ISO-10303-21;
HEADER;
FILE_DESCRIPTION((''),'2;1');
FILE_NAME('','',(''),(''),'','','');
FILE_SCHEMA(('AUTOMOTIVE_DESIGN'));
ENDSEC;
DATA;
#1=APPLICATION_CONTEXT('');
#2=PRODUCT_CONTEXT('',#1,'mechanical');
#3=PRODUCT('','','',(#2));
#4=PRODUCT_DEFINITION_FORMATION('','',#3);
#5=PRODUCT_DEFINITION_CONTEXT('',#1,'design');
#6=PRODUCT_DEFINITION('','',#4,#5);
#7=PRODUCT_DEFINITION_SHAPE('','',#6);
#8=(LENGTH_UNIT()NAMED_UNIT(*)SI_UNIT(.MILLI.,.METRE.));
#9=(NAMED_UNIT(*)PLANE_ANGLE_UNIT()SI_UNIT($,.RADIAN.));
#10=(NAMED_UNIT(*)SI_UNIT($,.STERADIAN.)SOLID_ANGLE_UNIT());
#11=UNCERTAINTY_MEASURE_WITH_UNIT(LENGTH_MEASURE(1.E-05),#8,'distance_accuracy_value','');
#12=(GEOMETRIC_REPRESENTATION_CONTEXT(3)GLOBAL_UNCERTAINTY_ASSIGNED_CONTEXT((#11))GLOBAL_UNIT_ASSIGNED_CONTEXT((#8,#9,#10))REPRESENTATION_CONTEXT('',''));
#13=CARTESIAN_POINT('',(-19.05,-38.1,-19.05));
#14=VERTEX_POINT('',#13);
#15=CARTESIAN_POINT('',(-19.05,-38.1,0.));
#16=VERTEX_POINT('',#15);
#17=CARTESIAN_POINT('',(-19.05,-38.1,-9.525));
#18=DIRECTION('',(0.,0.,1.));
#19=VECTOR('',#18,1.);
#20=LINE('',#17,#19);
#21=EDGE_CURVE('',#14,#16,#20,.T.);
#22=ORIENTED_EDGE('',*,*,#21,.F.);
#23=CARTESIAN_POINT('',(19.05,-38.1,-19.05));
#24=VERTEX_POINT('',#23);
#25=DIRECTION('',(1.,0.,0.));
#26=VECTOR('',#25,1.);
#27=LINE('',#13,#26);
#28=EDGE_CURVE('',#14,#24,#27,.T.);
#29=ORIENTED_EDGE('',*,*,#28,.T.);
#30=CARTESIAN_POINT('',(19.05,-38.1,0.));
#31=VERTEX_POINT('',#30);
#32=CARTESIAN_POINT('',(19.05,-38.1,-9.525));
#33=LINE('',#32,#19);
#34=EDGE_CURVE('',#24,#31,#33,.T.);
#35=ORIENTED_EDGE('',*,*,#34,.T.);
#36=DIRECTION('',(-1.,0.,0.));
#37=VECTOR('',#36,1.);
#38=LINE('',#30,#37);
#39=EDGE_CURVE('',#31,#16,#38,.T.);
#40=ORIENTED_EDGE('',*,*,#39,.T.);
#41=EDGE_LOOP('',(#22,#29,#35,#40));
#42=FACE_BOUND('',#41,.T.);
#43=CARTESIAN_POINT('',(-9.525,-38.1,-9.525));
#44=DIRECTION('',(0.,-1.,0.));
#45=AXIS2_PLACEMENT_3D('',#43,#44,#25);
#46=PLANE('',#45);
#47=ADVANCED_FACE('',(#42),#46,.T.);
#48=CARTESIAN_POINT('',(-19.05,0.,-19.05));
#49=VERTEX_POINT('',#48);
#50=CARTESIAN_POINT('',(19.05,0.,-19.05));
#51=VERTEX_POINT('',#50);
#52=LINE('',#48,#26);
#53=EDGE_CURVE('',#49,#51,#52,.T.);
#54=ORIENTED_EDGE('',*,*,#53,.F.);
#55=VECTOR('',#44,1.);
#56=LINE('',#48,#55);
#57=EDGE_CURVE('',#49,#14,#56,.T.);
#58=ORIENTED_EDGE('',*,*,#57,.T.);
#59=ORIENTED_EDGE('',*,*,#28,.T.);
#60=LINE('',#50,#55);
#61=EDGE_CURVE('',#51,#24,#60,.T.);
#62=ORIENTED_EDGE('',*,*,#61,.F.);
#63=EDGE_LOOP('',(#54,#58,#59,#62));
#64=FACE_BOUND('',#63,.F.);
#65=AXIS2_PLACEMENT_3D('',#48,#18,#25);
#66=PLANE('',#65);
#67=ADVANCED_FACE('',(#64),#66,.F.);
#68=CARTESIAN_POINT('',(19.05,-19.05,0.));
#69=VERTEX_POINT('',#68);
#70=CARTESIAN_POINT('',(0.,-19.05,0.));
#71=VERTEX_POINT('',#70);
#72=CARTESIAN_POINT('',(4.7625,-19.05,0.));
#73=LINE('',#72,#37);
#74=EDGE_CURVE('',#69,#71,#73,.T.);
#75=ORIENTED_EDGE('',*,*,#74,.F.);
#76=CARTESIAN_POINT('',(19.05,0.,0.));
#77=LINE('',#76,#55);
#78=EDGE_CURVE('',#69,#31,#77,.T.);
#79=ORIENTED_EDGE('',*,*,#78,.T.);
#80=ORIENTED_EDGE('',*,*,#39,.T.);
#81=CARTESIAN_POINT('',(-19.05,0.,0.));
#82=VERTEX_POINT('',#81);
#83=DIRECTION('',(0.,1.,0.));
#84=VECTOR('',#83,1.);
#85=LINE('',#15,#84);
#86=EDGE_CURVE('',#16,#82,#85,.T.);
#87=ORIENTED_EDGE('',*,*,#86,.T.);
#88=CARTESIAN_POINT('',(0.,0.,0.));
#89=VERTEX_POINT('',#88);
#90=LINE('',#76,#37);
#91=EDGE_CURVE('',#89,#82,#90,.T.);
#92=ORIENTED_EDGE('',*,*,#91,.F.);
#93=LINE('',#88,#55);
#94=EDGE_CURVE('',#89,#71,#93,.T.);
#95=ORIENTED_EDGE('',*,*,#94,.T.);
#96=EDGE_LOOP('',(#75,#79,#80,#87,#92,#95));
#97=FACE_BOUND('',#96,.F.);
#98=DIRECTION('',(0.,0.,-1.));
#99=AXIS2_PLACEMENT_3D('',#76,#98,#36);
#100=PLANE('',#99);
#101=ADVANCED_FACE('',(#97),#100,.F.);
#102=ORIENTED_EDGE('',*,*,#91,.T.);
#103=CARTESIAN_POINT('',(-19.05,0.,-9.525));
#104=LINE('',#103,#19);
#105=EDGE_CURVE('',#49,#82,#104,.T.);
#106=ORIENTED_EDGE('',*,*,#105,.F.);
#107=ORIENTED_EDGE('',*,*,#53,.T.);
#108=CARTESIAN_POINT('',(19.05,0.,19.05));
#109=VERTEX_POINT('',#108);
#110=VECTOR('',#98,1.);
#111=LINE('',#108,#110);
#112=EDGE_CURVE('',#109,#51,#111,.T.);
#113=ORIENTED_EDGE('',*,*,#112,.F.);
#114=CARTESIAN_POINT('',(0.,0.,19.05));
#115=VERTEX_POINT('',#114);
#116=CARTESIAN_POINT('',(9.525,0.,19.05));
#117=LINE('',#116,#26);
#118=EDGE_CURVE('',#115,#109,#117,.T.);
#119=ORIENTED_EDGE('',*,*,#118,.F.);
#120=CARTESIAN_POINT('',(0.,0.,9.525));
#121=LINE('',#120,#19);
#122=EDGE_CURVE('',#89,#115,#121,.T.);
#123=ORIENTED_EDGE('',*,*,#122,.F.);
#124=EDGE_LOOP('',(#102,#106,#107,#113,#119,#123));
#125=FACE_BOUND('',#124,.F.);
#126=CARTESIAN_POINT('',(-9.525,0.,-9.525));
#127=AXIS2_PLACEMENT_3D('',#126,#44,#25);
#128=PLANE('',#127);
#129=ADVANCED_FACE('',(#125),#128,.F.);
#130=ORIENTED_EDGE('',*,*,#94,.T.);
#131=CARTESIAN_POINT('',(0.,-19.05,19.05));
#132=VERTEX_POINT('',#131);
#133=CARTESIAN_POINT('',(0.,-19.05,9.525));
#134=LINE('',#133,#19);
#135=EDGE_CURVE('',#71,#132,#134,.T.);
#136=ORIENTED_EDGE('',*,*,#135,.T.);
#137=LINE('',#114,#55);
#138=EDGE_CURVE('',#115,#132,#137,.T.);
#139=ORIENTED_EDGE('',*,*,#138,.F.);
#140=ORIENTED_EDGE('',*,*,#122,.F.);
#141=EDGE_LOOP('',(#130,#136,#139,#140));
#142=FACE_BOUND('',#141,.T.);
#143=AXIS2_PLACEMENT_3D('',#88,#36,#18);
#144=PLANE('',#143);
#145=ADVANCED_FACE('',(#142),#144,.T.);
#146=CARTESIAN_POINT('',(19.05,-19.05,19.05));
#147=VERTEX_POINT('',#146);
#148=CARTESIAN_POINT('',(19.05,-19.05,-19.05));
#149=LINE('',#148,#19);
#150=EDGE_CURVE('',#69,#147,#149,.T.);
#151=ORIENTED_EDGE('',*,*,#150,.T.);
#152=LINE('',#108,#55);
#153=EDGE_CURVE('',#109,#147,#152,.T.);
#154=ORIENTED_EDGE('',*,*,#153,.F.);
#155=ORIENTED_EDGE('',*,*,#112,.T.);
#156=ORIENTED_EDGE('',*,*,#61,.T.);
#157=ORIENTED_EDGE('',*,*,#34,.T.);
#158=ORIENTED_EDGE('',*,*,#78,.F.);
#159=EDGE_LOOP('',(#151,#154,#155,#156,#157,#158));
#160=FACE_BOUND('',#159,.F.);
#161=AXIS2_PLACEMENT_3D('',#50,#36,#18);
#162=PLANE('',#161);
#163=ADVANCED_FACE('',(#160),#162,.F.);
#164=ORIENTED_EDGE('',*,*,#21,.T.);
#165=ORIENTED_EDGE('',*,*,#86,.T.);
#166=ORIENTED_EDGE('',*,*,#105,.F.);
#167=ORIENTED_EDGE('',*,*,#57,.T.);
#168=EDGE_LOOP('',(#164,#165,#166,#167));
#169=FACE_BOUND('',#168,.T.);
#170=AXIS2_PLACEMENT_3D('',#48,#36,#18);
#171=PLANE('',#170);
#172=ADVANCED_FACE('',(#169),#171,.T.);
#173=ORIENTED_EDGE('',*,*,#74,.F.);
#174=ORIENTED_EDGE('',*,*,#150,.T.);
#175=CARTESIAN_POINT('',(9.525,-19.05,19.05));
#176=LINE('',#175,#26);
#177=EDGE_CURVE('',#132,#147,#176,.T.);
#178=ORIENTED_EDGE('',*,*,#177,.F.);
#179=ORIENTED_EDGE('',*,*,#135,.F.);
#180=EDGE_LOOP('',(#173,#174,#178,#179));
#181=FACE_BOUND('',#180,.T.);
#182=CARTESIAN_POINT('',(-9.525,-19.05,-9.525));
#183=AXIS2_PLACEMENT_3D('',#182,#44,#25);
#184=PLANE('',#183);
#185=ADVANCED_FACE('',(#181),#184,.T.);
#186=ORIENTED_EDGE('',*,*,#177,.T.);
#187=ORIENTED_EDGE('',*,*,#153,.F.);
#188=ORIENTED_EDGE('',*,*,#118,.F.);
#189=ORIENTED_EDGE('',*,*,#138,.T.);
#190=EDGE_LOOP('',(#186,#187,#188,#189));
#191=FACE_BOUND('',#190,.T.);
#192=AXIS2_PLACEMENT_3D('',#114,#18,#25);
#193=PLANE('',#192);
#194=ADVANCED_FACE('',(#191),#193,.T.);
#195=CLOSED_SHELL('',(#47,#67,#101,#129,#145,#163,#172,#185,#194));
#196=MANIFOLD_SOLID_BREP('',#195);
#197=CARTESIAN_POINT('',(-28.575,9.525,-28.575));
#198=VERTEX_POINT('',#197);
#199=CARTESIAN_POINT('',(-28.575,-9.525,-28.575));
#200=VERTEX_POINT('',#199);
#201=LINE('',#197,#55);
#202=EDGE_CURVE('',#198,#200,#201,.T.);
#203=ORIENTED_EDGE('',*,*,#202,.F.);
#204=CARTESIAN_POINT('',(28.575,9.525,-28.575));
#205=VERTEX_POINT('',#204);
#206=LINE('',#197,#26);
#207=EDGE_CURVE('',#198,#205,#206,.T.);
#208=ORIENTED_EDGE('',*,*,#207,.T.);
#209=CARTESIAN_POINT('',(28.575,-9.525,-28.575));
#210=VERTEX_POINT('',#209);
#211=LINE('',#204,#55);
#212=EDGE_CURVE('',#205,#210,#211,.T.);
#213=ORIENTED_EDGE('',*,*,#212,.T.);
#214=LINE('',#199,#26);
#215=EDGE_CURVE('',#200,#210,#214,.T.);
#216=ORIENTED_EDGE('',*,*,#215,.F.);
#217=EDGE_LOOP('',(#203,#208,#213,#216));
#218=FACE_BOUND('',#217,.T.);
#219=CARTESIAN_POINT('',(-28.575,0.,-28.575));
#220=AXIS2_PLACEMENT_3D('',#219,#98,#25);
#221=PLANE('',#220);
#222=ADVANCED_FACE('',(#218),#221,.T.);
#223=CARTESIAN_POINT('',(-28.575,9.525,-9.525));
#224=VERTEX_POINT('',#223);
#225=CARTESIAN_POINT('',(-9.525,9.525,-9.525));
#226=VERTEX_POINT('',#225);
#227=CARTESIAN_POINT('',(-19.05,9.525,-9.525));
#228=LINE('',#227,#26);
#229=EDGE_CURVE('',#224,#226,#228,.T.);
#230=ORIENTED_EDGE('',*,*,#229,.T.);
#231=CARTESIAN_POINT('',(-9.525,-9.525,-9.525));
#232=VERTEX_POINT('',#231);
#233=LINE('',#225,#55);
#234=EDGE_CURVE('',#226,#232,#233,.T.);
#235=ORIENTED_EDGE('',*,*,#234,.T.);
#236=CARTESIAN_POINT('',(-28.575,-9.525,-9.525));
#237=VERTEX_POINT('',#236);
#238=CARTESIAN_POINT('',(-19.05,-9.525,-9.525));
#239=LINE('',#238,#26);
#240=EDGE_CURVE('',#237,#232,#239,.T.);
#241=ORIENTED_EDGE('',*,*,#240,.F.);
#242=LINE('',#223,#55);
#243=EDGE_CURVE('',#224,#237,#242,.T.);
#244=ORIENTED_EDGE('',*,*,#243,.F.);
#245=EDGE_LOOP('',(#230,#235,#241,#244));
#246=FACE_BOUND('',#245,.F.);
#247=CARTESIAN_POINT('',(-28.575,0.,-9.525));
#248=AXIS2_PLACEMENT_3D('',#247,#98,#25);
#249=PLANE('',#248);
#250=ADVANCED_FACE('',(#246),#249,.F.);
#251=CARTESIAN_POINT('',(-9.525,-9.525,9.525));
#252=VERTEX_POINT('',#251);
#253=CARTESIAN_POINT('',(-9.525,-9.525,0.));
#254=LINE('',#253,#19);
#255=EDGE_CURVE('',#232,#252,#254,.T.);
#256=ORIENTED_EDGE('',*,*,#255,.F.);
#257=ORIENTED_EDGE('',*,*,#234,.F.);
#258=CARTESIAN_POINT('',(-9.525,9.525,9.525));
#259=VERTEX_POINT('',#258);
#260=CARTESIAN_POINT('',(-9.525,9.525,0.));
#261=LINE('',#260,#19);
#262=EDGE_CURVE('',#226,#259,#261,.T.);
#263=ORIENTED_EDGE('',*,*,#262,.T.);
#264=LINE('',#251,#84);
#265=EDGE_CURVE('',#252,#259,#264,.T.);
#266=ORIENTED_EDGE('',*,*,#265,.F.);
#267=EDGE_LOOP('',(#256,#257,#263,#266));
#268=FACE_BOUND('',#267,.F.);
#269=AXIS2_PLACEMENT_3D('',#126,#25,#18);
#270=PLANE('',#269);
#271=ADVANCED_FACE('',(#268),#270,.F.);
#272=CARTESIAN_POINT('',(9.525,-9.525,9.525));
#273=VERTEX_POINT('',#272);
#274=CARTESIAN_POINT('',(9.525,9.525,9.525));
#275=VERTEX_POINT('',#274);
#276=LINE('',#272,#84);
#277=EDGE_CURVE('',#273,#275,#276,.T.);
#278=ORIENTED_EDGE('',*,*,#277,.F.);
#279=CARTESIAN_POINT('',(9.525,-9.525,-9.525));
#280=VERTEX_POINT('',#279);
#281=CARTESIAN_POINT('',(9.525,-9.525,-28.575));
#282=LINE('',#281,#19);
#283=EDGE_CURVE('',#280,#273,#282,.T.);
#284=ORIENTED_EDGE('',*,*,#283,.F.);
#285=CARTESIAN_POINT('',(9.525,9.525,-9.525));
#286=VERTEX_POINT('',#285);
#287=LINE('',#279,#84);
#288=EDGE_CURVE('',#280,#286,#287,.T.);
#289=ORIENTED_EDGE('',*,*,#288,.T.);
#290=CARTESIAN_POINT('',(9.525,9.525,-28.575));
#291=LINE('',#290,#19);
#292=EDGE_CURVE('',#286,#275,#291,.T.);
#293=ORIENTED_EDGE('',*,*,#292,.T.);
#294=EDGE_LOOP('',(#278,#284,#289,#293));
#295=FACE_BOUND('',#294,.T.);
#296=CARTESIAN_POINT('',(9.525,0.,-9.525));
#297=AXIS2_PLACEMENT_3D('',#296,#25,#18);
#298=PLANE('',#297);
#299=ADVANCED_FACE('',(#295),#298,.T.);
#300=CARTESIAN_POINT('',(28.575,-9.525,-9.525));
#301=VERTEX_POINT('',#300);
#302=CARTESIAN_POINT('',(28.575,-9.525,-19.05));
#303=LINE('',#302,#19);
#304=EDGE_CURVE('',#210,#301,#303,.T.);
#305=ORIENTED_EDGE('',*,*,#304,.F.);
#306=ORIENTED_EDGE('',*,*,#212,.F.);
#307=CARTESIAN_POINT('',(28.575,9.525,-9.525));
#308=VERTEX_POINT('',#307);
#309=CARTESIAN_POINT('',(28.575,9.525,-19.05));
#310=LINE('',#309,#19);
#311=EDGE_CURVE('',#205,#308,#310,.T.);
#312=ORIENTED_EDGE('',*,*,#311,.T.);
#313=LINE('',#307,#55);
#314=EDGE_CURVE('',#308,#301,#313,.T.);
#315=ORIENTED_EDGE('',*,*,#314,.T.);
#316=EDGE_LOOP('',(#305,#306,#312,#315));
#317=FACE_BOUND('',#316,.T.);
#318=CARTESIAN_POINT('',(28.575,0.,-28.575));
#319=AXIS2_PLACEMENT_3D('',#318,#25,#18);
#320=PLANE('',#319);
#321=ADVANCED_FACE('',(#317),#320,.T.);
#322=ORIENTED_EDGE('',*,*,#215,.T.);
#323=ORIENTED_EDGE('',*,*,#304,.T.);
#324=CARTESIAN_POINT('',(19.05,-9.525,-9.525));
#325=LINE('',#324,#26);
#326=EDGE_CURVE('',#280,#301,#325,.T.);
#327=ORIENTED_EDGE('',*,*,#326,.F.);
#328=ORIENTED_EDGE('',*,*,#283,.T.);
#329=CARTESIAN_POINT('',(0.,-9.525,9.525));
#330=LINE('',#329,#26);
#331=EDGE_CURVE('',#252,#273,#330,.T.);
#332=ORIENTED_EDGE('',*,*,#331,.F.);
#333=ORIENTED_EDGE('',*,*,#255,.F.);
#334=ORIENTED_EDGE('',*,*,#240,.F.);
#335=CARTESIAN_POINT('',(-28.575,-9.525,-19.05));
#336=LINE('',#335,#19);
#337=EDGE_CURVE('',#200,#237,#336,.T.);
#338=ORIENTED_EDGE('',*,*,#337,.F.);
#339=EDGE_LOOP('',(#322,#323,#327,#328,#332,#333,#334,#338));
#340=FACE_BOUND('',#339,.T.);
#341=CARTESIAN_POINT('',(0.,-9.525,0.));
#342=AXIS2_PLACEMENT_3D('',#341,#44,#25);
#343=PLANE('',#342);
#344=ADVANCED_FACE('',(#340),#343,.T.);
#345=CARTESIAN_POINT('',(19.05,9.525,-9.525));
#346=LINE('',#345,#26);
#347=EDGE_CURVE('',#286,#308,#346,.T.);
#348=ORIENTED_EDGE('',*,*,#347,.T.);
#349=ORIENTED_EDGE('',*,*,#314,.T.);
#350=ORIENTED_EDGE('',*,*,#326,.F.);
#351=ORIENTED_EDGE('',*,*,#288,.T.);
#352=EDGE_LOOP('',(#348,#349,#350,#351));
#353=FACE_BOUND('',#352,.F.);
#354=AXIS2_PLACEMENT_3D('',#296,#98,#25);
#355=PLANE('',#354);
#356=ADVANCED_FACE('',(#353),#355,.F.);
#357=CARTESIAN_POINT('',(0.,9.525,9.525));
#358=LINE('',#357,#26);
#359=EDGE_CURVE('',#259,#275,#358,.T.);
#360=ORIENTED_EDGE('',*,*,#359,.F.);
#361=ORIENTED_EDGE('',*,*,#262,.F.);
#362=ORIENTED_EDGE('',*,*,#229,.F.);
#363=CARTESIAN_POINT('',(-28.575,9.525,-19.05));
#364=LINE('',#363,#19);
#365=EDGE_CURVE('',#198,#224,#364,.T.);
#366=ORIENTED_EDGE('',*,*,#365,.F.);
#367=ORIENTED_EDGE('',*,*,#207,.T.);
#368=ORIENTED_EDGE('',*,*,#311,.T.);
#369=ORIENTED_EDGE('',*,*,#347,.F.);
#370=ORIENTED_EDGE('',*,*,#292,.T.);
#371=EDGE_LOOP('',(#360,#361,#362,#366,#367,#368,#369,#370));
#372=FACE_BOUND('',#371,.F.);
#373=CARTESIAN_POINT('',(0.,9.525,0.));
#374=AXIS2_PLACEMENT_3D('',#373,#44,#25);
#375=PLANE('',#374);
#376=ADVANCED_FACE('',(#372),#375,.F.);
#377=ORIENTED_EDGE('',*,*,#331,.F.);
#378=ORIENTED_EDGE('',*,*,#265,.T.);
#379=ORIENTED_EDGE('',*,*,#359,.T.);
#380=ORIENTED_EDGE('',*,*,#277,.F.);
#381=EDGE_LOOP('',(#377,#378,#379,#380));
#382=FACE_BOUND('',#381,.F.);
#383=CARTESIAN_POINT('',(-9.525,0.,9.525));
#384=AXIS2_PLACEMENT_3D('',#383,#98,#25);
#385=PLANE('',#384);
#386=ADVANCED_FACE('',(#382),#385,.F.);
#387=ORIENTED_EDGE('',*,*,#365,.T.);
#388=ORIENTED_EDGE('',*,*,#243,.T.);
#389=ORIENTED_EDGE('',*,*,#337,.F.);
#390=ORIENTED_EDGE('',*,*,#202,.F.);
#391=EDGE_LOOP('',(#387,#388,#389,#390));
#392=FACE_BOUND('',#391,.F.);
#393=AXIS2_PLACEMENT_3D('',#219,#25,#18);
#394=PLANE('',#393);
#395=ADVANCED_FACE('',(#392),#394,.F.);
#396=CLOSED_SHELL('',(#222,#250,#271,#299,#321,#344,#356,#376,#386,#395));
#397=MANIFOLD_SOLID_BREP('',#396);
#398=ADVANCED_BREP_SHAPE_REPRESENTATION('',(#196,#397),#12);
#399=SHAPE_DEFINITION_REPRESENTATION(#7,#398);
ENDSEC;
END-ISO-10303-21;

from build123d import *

# Parameters (mm, degrees)
F0_W     = 19.05
F0_H     = 19.05
F1_DEPTH = 9.525
F2_W     = 19.05
F2_H     = 19.05
F3_DEPTH = 38.1
F4_DEPTH = 19.05


with BuildPart() as f1:
    # F0 (on Front) → F1 (new body, symmetric)
    with BuildSketch(Plane.XZ):
        Rectangle(F0_W, F0_H)
        with Locations((-19.05, -19.05)):
            Rectangle(F0_W, F0_H)
        with Locations((0, -19.05)):
            Rectangle(F0_W, F0_H)
        with Locations((19.05, -19.05)):
            Rectangle(F0_W, F0_H)
    extrude(amount=F1_DEPTH, both=True)


with BuildPart() as f3:
    # F2 (on Front) → F3 (new body)
    with BuildSketch(Plane.XZ):
        with Locations((-9.525, -9.525)):
            Rectangle(F2_W, F2_H)
        with Locations((9.525, -9.525)):
            Rectangle(F2_W, F2_H)
    extrude(amount=F3_DEPTH)

    # F2 (on Front) → F4 (join)
    with BuildSketch(Plane.XZ):
        with Locations((-9.525, -9.525)):
            Rectangle(F2_W, F2_H)
        with Locations((9.525, -9.525)):
            Rectangle(F2_W, F2_H)
        with Locations((9.525, 9.525)):
            Rectangle(F2_W, F2_H)
    extrude(amount=F4_DEPTH)


solid = Compound([f1.part, f3.part])
